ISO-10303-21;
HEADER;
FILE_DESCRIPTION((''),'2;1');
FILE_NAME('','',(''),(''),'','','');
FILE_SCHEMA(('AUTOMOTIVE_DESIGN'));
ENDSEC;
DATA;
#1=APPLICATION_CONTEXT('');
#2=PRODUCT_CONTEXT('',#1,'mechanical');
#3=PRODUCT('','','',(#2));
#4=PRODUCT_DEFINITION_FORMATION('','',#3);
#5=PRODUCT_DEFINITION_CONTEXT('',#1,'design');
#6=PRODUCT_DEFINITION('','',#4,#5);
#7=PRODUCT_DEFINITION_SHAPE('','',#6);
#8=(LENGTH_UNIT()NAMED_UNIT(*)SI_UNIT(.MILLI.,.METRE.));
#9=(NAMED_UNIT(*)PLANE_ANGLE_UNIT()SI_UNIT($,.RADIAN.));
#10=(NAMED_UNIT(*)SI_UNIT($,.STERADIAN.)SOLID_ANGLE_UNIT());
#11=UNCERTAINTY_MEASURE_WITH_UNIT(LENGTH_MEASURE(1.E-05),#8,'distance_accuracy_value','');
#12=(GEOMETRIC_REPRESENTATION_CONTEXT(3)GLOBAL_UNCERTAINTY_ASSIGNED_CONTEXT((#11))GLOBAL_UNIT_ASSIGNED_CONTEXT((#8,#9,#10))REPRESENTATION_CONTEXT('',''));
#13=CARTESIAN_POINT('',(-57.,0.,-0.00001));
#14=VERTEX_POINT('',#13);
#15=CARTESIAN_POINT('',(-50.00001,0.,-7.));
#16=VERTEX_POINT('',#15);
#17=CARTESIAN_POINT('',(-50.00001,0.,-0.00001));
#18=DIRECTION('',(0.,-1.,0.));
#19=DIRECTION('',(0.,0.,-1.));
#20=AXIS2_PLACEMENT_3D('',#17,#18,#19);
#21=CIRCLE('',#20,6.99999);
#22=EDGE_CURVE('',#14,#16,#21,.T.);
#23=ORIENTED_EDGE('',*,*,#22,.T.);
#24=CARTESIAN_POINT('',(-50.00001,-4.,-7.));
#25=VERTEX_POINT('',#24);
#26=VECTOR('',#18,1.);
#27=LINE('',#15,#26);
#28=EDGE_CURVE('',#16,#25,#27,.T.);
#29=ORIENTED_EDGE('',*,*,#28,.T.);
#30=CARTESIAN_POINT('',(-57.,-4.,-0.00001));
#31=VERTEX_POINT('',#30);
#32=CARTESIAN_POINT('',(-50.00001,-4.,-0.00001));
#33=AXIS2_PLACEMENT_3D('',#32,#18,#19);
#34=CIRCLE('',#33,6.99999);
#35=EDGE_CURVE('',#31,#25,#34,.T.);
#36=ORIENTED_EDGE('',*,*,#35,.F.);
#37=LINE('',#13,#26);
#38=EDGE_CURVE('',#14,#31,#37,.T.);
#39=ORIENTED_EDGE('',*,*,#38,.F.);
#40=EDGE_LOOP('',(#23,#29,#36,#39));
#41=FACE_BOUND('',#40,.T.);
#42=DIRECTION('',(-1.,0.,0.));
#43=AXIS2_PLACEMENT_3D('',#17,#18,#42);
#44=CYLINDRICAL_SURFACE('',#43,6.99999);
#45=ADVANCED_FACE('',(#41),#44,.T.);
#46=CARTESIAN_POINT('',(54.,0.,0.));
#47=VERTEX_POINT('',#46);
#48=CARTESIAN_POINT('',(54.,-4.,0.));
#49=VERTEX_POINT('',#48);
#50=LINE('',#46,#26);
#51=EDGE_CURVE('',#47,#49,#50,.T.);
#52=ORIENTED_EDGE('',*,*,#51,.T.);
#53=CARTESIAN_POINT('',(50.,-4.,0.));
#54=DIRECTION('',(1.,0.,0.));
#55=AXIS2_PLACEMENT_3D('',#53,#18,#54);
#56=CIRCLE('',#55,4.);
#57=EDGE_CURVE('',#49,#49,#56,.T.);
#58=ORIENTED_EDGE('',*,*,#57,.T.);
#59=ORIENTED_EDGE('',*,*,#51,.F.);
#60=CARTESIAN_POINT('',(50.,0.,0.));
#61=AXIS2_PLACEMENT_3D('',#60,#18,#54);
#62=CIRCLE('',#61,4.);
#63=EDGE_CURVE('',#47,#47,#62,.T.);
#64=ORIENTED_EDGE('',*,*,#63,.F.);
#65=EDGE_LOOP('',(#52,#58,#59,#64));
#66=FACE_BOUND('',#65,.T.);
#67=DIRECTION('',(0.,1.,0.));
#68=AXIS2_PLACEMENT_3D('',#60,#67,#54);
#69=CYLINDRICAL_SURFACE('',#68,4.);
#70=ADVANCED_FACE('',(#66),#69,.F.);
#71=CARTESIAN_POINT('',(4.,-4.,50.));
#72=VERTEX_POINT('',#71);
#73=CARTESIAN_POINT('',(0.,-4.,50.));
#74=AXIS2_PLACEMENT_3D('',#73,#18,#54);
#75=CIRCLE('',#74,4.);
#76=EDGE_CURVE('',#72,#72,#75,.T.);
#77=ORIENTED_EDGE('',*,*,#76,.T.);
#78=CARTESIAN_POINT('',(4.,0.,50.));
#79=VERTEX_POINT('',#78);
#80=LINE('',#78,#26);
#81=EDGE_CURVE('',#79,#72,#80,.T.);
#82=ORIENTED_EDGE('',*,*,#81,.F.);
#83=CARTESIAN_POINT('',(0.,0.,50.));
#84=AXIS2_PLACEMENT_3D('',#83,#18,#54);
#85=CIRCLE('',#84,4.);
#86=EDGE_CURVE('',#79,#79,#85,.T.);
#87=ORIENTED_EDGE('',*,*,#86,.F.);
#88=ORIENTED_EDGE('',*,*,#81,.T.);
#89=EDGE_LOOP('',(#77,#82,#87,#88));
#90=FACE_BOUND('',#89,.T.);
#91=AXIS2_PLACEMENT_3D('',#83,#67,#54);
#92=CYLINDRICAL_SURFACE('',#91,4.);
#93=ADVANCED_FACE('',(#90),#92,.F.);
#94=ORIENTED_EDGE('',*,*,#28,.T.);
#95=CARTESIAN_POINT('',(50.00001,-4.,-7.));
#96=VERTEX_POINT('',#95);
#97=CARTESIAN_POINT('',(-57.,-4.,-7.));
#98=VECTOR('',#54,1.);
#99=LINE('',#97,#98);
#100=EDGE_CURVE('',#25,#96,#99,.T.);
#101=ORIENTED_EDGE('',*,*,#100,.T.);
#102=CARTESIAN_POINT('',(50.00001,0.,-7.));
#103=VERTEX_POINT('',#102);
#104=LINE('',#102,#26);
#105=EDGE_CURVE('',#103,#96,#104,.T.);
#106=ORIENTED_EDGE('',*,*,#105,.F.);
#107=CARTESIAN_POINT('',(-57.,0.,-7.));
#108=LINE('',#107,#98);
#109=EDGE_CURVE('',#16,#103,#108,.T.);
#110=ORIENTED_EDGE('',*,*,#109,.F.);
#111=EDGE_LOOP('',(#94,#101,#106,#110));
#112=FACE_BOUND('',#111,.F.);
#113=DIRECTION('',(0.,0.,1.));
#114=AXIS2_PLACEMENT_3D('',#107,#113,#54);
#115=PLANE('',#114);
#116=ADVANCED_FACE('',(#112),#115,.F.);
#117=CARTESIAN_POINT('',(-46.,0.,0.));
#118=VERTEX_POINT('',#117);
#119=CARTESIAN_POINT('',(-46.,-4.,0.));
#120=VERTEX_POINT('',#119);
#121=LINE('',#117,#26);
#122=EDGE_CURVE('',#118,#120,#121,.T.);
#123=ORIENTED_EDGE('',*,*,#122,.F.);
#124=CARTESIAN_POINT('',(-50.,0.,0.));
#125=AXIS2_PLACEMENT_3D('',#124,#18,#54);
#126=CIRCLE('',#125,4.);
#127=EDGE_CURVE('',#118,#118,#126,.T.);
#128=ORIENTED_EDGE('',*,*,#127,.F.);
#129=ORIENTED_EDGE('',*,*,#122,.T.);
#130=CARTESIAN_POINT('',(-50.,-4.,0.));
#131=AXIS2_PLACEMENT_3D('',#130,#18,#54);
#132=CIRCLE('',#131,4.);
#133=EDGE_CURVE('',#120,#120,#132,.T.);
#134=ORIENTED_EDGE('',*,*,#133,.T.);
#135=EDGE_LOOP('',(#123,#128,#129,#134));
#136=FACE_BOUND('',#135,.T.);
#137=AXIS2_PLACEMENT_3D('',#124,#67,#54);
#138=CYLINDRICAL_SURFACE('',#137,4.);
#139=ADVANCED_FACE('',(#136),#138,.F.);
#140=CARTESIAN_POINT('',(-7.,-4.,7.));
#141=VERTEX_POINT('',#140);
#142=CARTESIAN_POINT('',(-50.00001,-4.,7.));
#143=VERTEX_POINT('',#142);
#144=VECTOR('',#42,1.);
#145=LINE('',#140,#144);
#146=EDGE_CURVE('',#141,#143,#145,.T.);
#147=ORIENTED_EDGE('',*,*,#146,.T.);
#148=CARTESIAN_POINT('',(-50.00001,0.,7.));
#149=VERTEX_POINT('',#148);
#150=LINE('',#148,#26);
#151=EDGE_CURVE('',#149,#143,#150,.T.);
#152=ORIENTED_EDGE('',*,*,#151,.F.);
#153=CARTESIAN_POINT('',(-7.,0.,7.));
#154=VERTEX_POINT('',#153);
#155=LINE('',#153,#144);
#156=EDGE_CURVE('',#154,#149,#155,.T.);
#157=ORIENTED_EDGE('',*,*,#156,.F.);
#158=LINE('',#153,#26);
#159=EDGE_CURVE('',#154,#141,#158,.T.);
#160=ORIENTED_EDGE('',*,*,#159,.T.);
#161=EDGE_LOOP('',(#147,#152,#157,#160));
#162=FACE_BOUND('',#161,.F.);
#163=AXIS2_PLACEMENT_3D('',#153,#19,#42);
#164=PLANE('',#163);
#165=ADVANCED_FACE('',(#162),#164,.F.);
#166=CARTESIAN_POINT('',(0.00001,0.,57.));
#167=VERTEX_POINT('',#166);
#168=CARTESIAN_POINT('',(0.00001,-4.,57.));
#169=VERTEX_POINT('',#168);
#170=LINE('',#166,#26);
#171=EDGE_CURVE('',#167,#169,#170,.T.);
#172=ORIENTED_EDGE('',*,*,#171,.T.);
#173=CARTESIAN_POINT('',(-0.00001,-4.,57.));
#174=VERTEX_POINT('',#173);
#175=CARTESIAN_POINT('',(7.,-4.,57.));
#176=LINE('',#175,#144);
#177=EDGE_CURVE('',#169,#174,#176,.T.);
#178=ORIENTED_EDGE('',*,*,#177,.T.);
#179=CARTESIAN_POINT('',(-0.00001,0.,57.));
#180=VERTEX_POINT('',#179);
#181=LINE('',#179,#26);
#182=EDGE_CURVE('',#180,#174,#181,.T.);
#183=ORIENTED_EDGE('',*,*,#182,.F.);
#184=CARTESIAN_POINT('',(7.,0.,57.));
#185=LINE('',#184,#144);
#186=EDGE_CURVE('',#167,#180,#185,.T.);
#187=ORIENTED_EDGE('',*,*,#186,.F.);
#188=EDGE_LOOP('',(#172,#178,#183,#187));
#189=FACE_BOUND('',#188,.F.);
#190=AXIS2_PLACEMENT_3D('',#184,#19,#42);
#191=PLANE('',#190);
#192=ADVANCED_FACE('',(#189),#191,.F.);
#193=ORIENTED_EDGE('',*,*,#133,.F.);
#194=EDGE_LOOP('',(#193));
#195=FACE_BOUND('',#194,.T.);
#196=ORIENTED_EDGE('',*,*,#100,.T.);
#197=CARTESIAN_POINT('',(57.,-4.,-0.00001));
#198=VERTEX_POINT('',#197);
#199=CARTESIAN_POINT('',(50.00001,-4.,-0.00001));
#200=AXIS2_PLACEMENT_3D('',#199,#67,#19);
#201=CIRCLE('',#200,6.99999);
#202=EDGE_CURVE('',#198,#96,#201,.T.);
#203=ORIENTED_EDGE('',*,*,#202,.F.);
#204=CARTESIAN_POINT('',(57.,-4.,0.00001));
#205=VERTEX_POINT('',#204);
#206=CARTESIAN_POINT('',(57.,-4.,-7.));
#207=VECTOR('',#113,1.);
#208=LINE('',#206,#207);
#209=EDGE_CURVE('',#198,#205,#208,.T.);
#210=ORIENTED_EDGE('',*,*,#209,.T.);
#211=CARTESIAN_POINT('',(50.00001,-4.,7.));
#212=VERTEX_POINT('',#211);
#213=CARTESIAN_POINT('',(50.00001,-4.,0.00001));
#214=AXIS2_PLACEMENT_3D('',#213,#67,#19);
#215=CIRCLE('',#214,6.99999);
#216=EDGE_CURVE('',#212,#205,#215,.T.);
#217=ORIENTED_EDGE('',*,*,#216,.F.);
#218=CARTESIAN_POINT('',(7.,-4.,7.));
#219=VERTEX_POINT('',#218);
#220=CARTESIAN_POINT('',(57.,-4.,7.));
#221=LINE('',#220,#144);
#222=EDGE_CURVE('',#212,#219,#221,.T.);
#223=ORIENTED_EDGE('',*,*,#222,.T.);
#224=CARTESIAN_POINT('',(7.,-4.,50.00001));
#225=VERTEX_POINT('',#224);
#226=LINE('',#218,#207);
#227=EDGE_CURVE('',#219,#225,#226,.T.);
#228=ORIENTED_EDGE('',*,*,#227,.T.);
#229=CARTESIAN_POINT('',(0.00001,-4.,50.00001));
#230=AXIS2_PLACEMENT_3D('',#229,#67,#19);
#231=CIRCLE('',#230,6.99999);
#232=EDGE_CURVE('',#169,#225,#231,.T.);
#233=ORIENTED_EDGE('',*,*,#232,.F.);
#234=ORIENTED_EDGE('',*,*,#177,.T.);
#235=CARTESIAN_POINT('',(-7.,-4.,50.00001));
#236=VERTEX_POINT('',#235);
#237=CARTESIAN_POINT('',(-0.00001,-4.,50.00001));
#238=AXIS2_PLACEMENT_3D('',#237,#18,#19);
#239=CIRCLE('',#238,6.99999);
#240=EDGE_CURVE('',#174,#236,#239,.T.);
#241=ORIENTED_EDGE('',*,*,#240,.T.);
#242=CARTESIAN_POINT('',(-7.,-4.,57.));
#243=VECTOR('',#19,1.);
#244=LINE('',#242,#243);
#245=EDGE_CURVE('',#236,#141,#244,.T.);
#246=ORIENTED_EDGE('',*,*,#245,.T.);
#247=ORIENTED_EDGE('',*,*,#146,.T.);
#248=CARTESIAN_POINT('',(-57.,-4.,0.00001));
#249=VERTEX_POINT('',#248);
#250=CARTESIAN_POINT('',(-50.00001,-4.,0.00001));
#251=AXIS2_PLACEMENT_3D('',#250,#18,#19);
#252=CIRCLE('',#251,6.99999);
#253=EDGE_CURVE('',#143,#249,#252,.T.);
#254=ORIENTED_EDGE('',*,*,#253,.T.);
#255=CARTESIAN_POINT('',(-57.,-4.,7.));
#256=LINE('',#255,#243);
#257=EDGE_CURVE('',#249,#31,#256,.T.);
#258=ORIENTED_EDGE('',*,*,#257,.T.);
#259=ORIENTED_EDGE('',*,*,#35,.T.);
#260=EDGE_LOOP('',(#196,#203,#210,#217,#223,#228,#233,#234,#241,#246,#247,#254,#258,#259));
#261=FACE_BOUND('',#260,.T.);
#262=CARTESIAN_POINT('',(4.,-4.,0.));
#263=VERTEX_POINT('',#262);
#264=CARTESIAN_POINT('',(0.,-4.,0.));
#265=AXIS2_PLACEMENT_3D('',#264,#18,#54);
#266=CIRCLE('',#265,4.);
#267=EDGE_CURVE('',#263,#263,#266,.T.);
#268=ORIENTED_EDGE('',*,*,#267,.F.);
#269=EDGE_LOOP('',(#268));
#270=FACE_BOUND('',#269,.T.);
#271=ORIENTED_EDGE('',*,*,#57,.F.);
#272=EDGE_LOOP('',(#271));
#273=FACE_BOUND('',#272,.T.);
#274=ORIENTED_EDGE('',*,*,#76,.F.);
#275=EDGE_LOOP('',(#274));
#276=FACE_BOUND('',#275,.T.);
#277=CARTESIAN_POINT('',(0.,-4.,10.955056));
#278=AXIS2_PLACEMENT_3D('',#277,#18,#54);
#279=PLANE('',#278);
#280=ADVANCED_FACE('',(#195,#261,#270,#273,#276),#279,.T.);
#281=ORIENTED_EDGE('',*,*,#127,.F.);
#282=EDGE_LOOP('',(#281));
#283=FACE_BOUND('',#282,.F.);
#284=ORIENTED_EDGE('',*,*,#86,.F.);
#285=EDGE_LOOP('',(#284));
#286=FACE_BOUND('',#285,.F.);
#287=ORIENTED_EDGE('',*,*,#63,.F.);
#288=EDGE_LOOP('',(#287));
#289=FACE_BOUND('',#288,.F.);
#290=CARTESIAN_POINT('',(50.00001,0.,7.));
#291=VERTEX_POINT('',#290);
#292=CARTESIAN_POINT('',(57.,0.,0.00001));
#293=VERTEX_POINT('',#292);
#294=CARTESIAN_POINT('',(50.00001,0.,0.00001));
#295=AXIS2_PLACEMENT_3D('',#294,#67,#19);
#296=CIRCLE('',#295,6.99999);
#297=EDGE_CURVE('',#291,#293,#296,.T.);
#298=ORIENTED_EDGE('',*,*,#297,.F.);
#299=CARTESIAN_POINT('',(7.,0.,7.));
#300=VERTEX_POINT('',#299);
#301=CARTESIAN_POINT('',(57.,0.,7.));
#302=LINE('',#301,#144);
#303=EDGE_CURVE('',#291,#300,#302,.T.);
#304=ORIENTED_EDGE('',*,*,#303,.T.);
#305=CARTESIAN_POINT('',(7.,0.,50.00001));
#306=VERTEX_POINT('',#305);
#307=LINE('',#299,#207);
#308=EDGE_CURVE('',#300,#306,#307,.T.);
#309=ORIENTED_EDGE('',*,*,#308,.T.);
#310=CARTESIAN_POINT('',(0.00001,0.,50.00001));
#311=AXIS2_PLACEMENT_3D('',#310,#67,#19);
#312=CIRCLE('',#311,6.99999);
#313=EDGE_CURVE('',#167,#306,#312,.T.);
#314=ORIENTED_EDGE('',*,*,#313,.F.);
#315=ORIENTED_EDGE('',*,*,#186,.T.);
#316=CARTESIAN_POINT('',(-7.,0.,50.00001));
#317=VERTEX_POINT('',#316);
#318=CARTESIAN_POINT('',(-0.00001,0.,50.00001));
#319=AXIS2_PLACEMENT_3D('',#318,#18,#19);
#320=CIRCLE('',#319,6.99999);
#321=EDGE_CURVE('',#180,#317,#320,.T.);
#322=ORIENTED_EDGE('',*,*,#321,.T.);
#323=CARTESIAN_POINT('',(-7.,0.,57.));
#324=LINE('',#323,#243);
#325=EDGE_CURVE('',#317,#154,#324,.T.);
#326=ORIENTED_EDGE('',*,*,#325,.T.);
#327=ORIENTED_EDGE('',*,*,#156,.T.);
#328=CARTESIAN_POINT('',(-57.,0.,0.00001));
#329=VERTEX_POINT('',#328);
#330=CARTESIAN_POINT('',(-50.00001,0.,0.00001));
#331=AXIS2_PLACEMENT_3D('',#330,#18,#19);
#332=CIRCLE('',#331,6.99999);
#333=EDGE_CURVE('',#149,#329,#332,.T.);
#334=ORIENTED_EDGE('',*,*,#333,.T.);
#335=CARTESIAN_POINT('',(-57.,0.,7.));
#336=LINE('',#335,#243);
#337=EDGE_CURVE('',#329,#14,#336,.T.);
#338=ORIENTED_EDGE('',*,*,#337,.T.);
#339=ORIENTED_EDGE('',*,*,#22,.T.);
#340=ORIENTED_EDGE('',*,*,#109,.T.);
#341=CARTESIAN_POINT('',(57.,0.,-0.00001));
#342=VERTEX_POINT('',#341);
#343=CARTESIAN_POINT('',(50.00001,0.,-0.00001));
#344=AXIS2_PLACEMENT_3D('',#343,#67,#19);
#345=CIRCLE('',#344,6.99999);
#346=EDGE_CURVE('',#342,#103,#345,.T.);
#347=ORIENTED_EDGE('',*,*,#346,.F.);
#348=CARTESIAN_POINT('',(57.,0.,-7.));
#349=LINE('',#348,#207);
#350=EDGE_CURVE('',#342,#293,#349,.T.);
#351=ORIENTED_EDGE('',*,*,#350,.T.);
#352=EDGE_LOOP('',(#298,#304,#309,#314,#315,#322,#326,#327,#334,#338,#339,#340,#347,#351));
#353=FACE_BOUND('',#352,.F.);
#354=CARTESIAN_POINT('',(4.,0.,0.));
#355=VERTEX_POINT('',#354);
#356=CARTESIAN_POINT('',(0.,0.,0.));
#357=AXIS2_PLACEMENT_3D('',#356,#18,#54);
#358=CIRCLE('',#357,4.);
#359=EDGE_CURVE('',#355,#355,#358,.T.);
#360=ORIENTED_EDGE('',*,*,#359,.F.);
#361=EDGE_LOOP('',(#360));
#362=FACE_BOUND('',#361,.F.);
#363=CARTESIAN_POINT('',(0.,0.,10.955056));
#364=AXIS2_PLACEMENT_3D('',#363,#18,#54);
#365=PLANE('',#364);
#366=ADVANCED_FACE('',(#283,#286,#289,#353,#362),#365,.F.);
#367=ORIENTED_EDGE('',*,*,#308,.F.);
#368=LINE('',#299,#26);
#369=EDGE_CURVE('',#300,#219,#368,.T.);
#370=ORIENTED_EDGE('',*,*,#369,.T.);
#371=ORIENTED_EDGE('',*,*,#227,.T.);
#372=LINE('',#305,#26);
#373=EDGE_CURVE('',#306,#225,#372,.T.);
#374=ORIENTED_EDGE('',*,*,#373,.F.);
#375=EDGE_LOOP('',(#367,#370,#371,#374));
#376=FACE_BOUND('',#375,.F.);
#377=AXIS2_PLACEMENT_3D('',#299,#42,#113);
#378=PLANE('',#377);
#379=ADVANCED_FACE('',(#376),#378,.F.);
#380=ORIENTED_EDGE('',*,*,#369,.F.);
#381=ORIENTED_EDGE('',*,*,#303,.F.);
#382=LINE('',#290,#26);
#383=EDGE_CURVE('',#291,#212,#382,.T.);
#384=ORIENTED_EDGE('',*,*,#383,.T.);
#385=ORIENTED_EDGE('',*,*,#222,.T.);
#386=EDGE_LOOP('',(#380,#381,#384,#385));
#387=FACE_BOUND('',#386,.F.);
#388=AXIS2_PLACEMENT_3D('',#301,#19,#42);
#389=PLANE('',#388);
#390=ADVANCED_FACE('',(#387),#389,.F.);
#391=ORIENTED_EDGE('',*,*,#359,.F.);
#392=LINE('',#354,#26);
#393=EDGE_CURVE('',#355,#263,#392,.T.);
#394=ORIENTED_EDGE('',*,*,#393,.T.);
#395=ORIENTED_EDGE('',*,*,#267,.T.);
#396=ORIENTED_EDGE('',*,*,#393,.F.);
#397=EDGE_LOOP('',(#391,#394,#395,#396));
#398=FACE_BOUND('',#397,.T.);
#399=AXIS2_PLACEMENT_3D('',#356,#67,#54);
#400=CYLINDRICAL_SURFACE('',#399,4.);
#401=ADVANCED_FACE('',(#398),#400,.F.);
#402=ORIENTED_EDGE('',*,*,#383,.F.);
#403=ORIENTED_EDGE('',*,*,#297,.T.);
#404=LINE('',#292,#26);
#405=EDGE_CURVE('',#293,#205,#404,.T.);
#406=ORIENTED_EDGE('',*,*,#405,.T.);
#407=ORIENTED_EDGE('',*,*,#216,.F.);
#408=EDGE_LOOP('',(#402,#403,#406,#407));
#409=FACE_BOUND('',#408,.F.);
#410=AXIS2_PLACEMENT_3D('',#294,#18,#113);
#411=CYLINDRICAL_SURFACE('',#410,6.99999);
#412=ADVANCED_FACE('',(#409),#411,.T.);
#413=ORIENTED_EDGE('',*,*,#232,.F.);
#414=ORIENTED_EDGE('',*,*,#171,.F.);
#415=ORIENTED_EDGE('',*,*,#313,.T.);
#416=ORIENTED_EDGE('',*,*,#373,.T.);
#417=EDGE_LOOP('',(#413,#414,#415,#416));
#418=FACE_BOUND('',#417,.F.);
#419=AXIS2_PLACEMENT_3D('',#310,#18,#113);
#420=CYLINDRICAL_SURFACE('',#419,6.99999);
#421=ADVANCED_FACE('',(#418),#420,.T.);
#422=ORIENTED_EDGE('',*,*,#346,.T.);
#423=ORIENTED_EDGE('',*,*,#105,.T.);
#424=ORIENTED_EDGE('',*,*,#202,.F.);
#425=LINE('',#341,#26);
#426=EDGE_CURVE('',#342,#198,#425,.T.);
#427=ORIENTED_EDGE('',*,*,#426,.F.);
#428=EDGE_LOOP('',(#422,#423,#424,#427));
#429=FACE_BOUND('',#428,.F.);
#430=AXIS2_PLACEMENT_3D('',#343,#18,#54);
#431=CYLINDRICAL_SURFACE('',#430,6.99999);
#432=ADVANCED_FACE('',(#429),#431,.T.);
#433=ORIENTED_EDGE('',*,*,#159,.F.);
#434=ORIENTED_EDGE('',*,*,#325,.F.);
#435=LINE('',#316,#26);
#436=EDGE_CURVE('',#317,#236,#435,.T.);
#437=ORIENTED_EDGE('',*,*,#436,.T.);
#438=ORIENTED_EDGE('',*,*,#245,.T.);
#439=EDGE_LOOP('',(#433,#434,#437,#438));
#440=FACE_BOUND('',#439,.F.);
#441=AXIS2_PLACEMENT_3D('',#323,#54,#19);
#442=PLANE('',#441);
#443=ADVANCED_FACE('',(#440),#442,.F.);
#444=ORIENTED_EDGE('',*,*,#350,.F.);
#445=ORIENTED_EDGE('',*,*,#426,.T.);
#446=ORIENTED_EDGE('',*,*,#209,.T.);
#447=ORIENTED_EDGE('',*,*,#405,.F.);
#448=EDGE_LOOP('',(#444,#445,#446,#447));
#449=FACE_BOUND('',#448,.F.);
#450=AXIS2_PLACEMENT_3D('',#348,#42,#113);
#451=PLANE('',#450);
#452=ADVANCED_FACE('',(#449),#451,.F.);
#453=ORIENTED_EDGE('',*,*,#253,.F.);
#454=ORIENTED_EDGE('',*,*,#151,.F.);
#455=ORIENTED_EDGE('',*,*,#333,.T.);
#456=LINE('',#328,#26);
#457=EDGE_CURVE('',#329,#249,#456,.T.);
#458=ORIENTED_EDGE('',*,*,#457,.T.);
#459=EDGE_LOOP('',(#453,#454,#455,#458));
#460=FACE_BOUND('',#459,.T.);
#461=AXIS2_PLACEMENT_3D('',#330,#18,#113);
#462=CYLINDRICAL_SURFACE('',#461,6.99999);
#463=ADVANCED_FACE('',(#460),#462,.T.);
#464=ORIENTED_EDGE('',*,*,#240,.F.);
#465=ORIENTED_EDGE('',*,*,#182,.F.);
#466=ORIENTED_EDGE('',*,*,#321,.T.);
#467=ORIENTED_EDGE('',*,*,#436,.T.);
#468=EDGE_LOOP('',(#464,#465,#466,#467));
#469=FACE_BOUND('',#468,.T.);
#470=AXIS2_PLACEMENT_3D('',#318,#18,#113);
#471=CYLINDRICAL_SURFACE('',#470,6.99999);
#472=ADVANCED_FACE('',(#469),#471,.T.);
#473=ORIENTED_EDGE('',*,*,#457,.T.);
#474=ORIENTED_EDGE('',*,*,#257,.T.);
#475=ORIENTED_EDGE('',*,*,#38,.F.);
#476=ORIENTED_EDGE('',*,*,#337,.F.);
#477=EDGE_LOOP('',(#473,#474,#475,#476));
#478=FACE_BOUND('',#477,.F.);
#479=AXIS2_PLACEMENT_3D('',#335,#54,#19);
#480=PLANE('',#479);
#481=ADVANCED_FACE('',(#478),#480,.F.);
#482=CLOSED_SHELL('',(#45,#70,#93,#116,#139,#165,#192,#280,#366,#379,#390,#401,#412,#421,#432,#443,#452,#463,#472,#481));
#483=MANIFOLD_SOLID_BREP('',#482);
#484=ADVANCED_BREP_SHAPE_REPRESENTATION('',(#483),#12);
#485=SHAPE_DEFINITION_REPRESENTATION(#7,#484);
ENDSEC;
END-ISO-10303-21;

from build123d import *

# Parameters (mm, degrees)
F0_R     = 4
F1_DEPTH = 4
F2_R     = 6.99999


# Not quite as in the source:
# - a fillet or chamfer is up to 0.001 mm smaller than in the source, because OpenCascade refuses the exact size
# - a feature names something its author has since deleted; it is built from what else it names


with BuildPart() as f1:
    # F0 (on Front) → F1 (new body)
    with BuildSketch(Plane.XZ):
        Polygon((7, 57), (-7, 57), (-7, 7), (-57, 7), (-57, -7), (57, -7), (57, 7), (7, 7), align=None)
        with Locations((-50, 0)):
            Circle(F0_R, mode=Mode.SUBTRACT)
        Circle(F0_R, mode=Mode.SUBTRACT)
        with Locations((50, 0)):
            Circle(F0_R, mode=Mode.SUBTRACT)
        with Locations((0, 50)):
            Circle(F0_R, mode=Mode.SUBTRACT)
    extrude(amount=F1_DEPTH)

    # F2 (radius 7 in the source; OpenCascade refuses exactly that, so slightly less here)
    f2_edges = [f1.edges().sort_by_distance(p)[0] for p in [
        (57, -2, -7),
        (57, -2, 7),
        (7, -2, 57),
        (-7, -2, 57),
        (-57, -2, 7),
        (-57, -2, -7),
    ]]
    fillet(f2_edges, radius=F2_R)


solid = f1.part
